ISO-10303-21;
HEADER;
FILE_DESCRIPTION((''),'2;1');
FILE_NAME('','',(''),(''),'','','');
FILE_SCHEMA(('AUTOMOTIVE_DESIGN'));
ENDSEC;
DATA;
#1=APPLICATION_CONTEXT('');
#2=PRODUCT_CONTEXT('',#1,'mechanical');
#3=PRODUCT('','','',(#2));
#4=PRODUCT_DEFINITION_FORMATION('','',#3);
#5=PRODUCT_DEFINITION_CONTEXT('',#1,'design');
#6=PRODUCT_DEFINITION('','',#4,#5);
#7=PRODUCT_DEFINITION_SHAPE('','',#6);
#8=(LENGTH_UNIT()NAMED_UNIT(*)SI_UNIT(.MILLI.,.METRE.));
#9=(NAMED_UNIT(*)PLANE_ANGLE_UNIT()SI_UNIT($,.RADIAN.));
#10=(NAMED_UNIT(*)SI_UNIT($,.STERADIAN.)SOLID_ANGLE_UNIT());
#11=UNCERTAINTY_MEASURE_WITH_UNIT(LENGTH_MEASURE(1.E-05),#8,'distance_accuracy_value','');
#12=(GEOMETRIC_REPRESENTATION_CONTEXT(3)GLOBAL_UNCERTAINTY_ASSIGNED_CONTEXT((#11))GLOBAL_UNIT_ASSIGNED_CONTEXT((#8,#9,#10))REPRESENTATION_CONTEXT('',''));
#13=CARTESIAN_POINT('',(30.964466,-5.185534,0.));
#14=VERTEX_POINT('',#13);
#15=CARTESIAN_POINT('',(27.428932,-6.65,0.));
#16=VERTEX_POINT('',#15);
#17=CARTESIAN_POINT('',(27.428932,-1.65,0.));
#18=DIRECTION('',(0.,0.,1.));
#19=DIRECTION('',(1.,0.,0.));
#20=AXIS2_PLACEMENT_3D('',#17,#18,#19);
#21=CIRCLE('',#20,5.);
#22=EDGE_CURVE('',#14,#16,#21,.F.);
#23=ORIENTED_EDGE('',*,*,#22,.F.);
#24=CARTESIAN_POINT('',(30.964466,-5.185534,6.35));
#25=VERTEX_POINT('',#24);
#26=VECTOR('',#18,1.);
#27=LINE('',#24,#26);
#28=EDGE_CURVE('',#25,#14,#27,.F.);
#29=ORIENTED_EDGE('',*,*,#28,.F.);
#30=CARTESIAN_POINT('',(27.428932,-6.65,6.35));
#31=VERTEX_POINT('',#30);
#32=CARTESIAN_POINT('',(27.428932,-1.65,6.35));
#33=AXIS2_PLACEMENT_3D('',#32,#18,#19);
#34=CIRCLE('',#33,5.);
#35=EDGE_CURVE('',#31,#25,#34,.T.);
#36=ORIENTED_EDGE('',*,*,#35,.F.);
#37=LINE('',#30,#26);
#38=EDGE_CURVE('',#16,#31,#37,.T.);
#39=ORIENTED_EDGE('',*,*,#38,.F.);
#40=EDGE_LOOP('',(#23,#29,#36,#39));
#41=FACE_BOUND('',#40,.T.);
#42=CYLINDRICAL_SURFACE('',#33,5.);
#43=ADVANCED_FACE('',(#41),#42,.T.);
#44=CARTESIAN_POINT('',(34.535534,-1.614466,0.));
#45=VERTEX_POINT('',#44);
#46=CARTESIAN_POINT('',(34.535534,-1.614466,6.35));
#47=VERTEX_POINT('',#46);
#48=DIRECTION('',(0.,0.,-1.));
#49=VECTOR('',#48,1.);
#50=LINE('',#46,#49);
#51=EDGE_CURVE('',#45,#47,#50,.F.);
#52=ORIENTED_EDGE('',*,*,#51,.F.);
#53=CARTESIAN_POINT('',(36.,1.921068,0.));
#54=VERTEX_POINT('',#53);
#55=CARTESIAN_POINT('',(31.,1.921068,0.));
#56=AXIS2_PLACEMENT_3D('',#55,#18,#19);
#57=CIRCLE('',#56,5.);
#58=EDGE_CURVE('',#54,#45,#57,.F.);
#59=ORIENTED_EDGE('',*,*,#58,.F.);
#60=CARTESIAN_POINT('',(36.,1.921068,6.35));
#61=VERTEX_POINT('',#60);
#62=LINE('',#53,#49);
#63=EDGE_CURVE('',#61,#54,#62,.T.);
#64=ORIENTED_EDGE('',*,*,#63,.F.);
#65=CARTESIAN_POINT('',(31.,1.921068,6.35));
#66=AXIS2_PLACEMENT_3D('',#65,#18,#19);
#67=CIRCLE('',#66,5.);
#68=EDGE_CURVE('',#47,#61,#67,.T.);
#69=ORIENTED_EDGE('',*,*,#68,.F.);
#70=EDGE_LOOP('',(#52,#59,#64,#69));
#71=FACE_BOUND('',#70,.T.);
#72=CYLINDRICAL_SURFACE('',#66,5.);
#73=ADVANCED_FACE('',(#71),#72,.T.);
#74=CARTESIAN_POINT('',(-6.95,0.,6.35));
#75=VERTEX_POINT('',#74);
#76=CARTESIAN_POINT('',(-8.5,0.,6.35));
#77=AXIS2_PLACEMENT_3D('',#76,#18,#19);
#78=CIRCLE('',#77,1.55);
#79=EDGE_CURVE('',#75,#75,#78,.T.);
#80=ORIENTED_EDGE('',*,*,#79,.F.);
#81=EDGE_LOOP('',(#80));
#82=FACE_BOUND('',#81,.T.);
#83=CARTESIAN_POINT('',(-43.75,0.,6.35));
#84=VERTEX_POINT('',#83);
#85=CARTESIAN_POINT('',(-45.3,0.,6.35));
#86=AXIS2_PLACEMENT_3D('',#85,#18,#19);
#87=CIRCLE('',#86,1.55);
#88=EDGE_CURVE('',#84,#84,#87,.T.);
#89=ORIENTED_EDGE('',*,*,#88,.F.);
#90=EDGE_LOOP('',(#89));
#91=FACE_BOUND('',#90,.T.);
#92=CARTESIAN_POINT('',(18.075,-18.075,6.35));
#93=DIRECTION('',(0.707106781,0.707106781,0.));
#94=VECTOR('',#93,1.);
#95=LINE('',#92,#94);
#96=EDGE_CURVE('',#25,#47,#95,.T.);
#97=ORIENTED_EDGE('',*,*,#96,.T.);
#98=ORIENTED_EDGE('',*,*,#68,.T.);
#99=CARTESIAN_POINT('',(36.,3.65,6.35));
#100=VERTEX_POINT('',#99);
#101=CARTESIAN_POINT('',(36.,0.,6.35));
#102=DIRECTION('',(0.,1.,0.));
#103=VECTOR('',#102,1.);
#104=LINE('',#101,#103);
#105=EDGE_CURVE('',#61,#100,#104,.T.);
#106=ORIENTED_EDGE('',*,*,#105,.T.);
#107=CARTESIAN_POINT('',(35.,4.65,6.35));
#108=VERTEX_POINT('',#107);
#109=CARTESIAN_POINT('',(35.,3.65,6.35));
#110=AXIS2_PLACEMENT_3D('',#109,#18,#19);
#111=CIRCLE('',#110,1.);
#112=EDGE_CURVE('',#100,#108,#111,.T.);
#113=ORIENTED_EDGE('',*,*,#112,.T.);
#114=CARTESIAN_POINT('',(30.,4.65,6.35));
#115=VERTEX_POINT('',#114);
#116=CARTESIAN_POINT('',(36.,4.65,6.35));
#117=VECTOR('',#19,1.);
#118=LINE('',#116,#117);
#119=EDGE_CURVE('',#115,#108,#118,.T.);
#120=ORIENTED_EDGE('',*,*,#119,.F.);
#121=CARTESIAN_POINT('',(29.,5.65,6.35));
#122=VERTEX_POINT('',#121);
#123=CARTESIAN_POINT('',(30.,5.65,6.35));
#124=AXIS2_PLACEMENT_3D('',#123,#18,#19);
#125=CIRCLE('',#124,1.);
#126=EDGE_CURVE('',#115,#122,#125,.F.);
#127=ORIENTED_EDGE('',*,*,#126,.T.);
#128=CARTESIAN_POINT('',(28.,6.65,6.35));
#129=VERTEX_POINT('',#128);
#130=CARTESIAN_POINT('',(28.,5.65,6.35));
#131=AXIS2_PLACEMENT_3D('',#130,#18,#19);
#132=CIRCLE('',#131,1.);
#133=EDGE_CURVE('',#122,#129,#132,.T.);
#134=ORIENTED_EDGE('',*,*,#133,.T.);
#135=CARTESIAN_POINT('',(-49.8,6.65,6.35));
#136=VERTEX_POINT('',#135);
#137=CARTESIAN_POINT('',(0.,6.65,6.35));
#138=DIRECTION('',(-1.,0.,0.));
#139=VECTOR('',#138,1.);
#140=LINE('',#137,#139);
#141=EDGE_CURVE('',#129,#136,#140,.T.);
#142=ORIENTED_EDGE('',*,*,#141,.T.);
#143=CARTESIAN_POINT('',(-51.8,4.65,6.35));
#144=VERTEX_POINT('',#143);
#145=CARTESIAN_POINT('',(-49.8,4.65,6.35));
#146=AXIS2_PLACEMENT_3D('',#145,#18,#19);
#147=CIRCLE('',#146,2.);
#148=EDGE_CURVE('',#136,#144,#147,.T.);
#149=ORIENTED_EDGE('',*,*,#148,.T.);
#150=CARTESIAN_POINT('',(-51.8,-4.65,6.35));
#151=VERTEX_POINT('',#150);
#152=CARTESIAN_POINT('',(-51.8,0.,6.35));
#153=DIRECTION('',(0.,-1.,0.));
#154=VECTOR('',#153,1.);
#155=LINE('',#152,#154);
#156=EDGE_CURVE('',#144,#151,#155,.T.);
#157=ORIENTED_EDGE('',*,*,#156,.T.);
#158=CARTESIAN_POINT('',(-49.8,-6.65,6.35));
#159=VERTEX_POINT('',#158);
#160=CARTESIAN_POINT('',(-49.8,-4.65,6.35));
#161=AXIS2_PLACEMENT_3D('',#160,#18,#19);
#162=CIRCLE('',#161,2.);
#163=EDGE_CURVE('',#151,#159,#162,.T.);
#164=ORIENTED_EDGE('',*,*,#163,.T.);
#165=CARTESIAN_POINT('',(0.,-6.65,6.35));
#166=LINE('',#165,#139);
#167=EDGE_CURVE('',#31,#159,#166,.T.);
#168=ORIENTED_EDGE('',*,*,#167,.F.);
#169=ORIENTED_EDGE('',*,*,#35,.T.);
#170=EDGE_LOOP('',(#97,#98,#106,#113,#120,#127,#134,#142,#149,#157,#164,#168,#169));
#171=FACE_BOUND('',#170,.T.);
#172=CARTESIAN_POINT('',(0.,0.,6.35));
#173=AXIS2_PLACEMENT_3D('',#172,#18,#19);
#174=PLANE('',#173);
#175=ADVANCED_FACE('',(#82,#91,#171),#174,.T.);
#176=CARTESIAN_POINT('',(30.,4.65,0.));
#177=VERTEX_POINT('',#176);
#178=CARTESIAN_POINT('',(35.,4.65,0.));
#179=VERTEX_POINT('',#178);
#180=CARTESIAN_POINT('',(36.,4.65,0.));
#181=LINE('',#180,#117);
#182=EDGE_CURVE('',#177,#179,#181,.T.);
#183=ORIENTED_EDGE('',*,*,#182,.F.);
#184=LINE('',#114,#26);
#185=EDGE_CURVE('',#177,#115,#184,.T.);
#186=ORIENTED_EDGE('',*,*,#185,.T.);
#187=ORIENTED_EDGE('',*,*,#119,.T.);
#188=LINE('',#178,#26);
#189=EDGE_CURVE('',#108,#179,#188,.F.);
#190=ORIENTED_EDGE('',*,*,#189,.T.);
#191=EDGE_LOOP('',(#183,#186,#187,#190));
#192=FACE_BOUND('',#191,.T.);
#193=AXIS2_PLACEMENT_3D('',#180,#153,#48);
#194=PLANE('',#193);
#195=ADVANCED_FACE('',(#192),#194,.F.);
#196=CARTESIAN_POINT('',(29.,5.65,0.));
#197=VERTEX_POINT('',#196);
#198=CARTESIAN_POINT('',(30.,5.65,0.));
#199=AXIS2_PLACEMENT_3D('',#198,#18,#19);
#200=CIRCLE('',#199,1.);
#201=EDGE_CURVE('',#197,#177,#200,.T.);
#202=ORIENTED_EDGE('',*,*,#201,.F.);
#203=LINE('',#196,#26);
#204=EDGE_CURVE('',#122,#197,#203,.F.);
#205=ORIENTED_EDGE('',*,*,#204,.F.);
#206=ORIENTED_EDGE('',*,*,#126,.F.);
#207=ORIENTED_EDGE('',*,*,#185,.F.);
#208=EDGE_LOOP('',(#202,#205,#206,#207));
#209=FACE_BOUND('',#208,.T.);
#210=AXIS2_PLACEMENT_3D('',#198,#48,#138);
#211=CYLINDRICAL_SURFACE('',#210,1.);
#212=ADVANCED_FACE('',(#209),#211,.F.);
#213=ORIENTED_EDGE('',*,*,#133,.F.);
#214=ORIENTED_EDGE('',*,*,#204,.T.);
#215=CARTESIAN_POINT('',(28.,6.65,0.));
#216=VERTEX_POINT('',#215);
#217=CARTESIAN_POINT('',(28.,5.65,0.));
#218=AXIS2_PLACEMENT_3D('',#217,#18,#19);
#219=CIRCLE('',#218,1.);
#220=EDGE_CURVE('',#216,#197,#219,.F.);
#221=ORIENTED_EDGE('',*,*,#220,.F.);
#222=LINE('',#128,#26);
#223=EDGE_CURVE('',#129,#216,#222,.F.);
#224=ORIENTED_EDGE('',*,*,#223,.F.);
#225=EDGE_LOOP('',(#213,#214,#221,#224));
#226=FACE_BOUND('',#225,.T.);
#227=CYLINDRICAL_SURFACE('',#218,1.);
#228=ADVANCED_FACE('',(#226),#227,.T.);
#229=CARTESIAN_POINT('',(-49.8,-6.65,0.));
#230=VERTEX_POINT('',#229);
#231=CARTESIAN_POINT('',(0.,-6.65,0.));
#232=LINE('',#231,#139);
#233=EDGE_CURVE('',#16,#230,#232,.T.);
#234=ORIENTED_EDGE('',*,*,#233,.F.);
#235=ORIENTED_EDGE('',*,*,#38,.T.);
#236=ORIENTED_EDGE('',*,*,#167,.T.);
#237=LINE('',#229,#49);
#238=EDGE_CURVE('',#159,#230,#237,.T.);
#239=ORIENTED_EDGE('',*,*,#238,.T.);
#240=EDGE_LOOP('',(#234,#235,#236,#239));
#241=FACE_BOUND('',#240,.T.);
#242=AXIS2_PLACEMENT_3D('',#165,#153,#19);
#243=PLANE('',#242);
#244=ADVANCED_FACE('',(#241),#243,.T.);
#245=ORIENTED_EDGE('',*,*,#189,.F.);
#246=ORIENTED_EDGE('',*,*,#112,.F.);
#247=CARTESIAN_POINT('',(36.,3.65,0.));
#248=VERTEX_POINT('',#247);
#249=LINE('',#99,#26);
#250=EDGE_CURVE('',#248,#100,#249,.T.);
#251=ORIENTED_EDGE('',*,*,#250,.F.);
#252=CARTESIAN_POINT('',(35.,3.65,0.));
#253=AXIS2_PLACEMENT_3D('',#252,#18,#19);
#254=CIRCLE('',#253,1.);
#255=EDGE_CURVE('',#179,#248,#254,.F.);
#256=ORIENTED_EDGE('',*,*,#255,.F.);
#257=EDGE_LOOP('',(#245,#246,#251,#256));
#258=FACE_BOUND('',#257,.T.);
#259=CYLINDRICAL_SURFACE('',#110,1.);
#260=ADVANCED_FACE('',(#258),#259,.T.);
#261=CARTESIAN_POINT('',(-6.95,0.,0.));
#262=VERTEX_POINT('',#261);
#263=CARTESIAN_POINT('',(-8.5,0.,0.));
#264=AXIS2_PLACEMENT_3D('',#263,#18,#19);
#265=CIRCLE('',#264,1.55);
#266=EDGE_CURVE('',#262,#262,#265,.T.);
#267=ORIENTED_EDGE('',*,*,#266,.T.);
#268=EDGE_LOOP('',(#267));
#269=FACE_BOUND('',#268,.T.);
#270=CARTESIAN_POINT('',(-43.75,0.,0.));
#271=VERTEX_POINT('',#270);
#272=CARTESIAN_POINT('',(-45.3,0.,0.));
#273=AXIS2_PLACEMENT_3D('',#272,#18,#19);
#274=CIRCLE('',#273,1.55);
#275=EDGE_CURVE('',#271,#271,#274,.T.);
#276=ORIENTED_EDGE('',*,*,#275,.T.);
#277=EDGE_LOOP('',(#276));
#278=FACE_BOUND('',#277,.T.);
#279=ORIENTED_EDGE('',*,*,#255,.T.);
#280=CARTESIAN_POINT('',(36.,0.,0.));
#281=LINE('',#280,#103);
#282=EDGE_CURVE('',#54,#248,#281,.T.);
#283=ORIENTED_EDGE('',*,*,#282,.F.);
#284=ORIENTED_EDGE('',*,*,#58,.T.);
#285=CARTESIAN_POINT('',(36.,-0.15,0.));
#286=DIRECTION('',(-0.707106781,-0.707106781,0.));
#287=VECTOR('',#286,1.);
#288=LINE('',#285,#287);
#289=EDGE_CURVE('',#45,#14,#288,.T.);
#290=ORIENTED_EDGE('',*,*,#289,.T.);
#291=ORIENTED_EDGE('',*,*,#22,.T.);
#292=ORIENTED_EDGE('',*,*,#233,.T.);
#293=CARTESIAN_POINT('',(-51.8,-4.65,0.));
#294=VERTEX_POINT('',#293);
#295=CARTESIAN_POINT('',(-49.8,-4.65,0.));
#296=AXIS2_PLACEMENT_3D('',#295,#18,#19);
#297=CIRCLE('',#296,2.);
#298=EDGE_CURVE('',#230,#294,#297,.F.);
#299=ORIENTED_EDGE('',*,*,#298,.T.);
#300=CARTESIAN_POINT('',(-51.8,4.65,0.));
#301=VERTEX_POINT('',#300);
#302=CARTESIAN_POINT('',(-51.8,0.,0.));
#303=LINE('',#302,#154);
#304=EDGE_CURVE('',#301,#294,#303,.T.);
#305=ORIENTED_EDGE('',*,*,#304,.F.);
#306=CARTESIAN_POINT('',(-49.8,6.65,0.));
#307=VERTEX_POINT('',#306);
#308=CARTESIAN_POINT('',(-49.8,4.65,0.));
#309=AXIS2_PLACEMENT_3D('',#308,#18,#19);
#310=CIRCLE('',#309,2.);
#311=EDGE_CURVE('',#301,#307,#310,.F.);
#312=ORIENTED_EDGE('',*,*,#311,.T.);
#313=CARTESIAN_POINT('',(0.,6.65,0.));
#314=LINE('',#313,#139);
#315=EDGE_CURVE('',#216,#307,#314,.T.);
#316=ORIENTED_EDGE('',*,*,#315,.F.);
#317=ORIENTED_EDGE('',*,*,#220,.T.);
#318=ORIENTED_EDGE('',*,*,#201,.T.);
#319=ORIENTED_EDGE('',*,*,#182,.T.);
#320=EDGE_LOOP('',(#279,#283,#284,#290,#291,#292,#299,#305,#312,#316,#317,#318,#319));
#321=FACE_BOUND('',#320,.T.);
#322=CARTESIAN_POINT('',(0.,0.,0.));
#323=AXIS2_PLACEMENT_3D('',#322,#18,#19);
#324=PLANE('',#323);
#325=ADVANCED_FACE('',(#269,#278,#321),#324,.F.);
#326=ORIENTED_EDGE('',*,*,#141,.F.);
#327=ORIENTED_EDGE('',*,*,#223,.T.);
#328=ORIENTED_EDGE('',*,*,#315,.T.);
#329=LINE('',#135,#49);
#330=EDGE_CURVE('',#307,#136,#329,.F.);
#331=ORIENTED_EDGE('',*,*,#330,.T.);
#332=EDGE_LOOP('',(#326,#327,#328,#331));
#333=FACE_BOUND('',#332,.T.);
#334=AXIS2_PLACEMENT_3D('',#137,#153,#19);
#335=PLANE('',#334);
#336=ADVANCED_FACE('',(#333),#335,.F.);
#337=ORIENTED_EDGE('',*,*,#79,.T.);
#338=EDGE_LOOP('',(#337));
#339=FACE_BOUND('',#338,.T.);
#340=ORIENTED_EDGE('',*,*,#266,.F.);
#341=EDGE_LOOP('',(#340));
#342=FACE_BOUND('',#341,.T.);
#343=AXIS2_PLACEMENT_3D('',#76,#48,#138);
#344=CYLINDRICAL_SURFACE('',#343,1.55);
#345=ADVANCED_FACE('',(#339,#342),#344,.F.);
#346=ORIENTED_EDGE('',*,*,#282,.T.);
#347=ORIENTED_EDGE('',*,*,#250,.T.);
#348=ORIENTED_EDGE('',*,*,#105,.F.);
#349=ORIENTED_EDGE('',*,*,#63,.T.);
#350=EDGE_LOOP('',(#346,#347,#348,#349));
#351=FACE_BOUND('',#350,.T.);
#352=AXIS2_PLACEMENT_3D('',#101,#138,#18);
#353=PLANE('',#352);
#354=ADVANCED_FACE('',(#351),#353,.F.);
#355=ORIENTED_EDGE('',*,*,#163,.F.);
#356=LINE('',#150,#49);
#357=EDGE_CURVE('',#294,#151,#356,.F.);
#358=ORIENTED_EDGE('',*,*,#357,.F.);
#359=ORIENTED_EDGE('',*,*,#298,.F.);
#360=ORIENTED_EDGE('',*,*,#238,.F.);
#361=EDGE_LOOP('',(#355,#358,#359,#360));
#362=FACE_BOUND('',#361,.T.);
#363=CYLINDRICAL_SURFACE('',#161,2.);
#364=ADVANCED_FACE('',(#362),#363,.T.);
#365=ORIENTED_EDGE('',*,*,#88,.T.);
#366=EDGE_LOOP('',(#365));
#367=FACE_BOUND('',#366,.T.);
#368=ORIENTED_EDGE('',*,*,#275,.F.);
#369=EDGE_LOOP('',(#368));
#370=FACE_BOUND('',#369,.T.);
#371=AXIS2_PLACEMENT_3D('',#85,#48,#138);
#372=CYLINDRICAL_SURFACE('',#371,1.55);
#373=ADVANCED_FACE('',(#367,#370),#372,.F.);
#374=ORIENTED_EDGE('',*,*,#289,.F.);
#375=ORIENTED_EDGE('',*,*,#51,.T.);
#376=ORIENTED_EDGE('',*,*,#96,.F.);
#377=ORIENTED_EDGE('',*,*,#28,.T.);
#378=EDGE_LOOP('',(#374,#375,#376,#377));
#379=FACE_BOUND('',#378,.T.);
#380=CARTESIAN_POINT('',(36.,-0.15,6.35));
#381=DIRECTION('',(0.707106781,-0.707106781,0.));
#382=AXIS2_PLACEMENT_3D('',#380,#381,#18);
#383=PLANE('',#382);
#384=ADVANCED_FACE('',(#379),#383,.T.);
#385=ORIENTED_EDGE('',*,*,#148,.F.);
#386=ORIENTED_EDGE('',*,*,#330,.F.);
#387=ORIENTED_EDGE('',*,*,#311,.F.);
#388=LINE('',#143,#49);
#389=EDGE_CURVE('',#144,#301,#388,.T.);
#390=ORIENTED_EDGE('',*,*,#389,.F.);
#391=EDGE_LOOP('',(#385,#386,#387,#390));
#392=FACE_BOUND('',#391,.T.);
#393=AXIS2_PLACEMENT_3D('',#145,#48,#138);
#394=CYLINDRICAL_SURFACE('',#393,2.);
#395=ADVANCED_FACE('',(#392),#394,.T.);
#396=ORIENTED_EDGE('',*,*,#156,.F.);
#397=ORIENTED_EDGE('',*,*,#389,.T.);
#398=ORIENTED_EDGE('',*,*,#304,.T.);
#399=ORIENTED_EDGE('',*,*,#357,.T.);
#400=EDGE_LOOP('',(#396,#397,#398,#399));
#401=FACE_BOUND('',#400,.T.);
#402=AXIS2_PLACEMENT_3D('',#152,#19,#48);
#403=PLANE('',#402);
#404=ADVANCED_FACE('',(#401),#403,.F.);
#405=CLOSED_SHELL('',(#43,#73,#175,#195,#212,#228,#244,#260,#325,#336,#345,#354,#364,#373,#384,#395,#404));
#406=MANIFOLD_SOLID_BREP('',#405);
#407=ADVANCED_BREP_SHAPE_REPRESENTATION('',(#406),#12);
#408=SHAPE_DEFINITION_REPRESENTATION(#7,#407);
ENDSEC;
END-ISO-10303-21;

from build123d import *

# Parameters (mm, degrees)
SKETCH1_W           = 13.3
SKETCH1_H           = 13.3
SKETCH1_R           = 1.55
SKETCH1_W_2         = 74.5
BOSS_EXTRUDE1_DEPTH = 6.35
FILLET2_R           = 2
CHAMFER1_SIZE       = 6.5
FILLET3_R           = 5
SKETCH2_W           = 7
SKETCH2_H           = 2
CUT_EXTRUDE1_DEPTH  = 53.609742444
FILLET4_R           = 1


with BuildPart() as part:
    # Sketch1 → Boss-Extrude1 (new body)
    # profile 1 of 2: a face of its own
    with BuildSketch(Plane.XY):
        with Locations((-45.15, 0)):
            Rectangle(SKETCH1_W, SKETCH1_H)
        with Locations((-45.3, 0)):
            Circle(SKETCH1_R, mode=Mode.SUBTRACT)
    # profile 2 of 2: a face of its own
    with BuildSketch(Plane.XY):
        with Locations((-1.25, 0)):
            Rectangle(SKETCH1_W_2, SKETCH1_H)
        with Locations((-8.5, 0)):
            Circle(SKETCH1_R, mode=Mode.SUBTRACT)
    extrude(amount=BOSS_EXTRUDE1_DEPTH)

    # Fillet2
    fillet2_edges = [part.edges().sort_by_distance(p)[0] for p in [
        (36, 6.65, 3.175),
        (-51.8, -6.65, 3.175),
        (-51.8, 6.65, 3.175),
    ]]
    fillet(fillet2_edges, radius=FILLET2_R)

    # Chamfer1
    chamfer1_edges = [part.edges().sort_by_distance(p)[0] for p in [
        (36, -6.65, 3.175),
    ]]
    chamfer(chamfer1_edges, length=CHAMFER1_SIZE)

    # Fillet3
    fillet3_edges = [part.edges().sort_by_distance(p)[0] for p in [
        (36, -0.15, 3.175),
        (29.5, -6.65, 3.175),
    ]]
    fillet(fillet3_edges, radius=FILLET3_R)

    # Sketch2 → Cut-Extrude1 (cut, through all)
    with BuildSketch(Plane.XY.offset(6.35)):
        with Locations((32.5, 5.65)):
            Rectangle(SKETCH2_W, SKETCH2_H)
    extrude(amount=-CUT_EXTRUDE1_DEPTH, mode=Mode.SUBTRACT)

    # Fillet4
    fillet4_edges = [part.edges().sort_by_distance(p)[0] for p in [
        (29, 6.65, 3.175),
        (29, 4.65, 3.175),
        (36, 4.65, 3.175),
    ]]
    fillet(fillet4_edges, radius=FILLET4_R - 0.0001)  # a hair under: the kernel refuses the full size


solid = part.part
